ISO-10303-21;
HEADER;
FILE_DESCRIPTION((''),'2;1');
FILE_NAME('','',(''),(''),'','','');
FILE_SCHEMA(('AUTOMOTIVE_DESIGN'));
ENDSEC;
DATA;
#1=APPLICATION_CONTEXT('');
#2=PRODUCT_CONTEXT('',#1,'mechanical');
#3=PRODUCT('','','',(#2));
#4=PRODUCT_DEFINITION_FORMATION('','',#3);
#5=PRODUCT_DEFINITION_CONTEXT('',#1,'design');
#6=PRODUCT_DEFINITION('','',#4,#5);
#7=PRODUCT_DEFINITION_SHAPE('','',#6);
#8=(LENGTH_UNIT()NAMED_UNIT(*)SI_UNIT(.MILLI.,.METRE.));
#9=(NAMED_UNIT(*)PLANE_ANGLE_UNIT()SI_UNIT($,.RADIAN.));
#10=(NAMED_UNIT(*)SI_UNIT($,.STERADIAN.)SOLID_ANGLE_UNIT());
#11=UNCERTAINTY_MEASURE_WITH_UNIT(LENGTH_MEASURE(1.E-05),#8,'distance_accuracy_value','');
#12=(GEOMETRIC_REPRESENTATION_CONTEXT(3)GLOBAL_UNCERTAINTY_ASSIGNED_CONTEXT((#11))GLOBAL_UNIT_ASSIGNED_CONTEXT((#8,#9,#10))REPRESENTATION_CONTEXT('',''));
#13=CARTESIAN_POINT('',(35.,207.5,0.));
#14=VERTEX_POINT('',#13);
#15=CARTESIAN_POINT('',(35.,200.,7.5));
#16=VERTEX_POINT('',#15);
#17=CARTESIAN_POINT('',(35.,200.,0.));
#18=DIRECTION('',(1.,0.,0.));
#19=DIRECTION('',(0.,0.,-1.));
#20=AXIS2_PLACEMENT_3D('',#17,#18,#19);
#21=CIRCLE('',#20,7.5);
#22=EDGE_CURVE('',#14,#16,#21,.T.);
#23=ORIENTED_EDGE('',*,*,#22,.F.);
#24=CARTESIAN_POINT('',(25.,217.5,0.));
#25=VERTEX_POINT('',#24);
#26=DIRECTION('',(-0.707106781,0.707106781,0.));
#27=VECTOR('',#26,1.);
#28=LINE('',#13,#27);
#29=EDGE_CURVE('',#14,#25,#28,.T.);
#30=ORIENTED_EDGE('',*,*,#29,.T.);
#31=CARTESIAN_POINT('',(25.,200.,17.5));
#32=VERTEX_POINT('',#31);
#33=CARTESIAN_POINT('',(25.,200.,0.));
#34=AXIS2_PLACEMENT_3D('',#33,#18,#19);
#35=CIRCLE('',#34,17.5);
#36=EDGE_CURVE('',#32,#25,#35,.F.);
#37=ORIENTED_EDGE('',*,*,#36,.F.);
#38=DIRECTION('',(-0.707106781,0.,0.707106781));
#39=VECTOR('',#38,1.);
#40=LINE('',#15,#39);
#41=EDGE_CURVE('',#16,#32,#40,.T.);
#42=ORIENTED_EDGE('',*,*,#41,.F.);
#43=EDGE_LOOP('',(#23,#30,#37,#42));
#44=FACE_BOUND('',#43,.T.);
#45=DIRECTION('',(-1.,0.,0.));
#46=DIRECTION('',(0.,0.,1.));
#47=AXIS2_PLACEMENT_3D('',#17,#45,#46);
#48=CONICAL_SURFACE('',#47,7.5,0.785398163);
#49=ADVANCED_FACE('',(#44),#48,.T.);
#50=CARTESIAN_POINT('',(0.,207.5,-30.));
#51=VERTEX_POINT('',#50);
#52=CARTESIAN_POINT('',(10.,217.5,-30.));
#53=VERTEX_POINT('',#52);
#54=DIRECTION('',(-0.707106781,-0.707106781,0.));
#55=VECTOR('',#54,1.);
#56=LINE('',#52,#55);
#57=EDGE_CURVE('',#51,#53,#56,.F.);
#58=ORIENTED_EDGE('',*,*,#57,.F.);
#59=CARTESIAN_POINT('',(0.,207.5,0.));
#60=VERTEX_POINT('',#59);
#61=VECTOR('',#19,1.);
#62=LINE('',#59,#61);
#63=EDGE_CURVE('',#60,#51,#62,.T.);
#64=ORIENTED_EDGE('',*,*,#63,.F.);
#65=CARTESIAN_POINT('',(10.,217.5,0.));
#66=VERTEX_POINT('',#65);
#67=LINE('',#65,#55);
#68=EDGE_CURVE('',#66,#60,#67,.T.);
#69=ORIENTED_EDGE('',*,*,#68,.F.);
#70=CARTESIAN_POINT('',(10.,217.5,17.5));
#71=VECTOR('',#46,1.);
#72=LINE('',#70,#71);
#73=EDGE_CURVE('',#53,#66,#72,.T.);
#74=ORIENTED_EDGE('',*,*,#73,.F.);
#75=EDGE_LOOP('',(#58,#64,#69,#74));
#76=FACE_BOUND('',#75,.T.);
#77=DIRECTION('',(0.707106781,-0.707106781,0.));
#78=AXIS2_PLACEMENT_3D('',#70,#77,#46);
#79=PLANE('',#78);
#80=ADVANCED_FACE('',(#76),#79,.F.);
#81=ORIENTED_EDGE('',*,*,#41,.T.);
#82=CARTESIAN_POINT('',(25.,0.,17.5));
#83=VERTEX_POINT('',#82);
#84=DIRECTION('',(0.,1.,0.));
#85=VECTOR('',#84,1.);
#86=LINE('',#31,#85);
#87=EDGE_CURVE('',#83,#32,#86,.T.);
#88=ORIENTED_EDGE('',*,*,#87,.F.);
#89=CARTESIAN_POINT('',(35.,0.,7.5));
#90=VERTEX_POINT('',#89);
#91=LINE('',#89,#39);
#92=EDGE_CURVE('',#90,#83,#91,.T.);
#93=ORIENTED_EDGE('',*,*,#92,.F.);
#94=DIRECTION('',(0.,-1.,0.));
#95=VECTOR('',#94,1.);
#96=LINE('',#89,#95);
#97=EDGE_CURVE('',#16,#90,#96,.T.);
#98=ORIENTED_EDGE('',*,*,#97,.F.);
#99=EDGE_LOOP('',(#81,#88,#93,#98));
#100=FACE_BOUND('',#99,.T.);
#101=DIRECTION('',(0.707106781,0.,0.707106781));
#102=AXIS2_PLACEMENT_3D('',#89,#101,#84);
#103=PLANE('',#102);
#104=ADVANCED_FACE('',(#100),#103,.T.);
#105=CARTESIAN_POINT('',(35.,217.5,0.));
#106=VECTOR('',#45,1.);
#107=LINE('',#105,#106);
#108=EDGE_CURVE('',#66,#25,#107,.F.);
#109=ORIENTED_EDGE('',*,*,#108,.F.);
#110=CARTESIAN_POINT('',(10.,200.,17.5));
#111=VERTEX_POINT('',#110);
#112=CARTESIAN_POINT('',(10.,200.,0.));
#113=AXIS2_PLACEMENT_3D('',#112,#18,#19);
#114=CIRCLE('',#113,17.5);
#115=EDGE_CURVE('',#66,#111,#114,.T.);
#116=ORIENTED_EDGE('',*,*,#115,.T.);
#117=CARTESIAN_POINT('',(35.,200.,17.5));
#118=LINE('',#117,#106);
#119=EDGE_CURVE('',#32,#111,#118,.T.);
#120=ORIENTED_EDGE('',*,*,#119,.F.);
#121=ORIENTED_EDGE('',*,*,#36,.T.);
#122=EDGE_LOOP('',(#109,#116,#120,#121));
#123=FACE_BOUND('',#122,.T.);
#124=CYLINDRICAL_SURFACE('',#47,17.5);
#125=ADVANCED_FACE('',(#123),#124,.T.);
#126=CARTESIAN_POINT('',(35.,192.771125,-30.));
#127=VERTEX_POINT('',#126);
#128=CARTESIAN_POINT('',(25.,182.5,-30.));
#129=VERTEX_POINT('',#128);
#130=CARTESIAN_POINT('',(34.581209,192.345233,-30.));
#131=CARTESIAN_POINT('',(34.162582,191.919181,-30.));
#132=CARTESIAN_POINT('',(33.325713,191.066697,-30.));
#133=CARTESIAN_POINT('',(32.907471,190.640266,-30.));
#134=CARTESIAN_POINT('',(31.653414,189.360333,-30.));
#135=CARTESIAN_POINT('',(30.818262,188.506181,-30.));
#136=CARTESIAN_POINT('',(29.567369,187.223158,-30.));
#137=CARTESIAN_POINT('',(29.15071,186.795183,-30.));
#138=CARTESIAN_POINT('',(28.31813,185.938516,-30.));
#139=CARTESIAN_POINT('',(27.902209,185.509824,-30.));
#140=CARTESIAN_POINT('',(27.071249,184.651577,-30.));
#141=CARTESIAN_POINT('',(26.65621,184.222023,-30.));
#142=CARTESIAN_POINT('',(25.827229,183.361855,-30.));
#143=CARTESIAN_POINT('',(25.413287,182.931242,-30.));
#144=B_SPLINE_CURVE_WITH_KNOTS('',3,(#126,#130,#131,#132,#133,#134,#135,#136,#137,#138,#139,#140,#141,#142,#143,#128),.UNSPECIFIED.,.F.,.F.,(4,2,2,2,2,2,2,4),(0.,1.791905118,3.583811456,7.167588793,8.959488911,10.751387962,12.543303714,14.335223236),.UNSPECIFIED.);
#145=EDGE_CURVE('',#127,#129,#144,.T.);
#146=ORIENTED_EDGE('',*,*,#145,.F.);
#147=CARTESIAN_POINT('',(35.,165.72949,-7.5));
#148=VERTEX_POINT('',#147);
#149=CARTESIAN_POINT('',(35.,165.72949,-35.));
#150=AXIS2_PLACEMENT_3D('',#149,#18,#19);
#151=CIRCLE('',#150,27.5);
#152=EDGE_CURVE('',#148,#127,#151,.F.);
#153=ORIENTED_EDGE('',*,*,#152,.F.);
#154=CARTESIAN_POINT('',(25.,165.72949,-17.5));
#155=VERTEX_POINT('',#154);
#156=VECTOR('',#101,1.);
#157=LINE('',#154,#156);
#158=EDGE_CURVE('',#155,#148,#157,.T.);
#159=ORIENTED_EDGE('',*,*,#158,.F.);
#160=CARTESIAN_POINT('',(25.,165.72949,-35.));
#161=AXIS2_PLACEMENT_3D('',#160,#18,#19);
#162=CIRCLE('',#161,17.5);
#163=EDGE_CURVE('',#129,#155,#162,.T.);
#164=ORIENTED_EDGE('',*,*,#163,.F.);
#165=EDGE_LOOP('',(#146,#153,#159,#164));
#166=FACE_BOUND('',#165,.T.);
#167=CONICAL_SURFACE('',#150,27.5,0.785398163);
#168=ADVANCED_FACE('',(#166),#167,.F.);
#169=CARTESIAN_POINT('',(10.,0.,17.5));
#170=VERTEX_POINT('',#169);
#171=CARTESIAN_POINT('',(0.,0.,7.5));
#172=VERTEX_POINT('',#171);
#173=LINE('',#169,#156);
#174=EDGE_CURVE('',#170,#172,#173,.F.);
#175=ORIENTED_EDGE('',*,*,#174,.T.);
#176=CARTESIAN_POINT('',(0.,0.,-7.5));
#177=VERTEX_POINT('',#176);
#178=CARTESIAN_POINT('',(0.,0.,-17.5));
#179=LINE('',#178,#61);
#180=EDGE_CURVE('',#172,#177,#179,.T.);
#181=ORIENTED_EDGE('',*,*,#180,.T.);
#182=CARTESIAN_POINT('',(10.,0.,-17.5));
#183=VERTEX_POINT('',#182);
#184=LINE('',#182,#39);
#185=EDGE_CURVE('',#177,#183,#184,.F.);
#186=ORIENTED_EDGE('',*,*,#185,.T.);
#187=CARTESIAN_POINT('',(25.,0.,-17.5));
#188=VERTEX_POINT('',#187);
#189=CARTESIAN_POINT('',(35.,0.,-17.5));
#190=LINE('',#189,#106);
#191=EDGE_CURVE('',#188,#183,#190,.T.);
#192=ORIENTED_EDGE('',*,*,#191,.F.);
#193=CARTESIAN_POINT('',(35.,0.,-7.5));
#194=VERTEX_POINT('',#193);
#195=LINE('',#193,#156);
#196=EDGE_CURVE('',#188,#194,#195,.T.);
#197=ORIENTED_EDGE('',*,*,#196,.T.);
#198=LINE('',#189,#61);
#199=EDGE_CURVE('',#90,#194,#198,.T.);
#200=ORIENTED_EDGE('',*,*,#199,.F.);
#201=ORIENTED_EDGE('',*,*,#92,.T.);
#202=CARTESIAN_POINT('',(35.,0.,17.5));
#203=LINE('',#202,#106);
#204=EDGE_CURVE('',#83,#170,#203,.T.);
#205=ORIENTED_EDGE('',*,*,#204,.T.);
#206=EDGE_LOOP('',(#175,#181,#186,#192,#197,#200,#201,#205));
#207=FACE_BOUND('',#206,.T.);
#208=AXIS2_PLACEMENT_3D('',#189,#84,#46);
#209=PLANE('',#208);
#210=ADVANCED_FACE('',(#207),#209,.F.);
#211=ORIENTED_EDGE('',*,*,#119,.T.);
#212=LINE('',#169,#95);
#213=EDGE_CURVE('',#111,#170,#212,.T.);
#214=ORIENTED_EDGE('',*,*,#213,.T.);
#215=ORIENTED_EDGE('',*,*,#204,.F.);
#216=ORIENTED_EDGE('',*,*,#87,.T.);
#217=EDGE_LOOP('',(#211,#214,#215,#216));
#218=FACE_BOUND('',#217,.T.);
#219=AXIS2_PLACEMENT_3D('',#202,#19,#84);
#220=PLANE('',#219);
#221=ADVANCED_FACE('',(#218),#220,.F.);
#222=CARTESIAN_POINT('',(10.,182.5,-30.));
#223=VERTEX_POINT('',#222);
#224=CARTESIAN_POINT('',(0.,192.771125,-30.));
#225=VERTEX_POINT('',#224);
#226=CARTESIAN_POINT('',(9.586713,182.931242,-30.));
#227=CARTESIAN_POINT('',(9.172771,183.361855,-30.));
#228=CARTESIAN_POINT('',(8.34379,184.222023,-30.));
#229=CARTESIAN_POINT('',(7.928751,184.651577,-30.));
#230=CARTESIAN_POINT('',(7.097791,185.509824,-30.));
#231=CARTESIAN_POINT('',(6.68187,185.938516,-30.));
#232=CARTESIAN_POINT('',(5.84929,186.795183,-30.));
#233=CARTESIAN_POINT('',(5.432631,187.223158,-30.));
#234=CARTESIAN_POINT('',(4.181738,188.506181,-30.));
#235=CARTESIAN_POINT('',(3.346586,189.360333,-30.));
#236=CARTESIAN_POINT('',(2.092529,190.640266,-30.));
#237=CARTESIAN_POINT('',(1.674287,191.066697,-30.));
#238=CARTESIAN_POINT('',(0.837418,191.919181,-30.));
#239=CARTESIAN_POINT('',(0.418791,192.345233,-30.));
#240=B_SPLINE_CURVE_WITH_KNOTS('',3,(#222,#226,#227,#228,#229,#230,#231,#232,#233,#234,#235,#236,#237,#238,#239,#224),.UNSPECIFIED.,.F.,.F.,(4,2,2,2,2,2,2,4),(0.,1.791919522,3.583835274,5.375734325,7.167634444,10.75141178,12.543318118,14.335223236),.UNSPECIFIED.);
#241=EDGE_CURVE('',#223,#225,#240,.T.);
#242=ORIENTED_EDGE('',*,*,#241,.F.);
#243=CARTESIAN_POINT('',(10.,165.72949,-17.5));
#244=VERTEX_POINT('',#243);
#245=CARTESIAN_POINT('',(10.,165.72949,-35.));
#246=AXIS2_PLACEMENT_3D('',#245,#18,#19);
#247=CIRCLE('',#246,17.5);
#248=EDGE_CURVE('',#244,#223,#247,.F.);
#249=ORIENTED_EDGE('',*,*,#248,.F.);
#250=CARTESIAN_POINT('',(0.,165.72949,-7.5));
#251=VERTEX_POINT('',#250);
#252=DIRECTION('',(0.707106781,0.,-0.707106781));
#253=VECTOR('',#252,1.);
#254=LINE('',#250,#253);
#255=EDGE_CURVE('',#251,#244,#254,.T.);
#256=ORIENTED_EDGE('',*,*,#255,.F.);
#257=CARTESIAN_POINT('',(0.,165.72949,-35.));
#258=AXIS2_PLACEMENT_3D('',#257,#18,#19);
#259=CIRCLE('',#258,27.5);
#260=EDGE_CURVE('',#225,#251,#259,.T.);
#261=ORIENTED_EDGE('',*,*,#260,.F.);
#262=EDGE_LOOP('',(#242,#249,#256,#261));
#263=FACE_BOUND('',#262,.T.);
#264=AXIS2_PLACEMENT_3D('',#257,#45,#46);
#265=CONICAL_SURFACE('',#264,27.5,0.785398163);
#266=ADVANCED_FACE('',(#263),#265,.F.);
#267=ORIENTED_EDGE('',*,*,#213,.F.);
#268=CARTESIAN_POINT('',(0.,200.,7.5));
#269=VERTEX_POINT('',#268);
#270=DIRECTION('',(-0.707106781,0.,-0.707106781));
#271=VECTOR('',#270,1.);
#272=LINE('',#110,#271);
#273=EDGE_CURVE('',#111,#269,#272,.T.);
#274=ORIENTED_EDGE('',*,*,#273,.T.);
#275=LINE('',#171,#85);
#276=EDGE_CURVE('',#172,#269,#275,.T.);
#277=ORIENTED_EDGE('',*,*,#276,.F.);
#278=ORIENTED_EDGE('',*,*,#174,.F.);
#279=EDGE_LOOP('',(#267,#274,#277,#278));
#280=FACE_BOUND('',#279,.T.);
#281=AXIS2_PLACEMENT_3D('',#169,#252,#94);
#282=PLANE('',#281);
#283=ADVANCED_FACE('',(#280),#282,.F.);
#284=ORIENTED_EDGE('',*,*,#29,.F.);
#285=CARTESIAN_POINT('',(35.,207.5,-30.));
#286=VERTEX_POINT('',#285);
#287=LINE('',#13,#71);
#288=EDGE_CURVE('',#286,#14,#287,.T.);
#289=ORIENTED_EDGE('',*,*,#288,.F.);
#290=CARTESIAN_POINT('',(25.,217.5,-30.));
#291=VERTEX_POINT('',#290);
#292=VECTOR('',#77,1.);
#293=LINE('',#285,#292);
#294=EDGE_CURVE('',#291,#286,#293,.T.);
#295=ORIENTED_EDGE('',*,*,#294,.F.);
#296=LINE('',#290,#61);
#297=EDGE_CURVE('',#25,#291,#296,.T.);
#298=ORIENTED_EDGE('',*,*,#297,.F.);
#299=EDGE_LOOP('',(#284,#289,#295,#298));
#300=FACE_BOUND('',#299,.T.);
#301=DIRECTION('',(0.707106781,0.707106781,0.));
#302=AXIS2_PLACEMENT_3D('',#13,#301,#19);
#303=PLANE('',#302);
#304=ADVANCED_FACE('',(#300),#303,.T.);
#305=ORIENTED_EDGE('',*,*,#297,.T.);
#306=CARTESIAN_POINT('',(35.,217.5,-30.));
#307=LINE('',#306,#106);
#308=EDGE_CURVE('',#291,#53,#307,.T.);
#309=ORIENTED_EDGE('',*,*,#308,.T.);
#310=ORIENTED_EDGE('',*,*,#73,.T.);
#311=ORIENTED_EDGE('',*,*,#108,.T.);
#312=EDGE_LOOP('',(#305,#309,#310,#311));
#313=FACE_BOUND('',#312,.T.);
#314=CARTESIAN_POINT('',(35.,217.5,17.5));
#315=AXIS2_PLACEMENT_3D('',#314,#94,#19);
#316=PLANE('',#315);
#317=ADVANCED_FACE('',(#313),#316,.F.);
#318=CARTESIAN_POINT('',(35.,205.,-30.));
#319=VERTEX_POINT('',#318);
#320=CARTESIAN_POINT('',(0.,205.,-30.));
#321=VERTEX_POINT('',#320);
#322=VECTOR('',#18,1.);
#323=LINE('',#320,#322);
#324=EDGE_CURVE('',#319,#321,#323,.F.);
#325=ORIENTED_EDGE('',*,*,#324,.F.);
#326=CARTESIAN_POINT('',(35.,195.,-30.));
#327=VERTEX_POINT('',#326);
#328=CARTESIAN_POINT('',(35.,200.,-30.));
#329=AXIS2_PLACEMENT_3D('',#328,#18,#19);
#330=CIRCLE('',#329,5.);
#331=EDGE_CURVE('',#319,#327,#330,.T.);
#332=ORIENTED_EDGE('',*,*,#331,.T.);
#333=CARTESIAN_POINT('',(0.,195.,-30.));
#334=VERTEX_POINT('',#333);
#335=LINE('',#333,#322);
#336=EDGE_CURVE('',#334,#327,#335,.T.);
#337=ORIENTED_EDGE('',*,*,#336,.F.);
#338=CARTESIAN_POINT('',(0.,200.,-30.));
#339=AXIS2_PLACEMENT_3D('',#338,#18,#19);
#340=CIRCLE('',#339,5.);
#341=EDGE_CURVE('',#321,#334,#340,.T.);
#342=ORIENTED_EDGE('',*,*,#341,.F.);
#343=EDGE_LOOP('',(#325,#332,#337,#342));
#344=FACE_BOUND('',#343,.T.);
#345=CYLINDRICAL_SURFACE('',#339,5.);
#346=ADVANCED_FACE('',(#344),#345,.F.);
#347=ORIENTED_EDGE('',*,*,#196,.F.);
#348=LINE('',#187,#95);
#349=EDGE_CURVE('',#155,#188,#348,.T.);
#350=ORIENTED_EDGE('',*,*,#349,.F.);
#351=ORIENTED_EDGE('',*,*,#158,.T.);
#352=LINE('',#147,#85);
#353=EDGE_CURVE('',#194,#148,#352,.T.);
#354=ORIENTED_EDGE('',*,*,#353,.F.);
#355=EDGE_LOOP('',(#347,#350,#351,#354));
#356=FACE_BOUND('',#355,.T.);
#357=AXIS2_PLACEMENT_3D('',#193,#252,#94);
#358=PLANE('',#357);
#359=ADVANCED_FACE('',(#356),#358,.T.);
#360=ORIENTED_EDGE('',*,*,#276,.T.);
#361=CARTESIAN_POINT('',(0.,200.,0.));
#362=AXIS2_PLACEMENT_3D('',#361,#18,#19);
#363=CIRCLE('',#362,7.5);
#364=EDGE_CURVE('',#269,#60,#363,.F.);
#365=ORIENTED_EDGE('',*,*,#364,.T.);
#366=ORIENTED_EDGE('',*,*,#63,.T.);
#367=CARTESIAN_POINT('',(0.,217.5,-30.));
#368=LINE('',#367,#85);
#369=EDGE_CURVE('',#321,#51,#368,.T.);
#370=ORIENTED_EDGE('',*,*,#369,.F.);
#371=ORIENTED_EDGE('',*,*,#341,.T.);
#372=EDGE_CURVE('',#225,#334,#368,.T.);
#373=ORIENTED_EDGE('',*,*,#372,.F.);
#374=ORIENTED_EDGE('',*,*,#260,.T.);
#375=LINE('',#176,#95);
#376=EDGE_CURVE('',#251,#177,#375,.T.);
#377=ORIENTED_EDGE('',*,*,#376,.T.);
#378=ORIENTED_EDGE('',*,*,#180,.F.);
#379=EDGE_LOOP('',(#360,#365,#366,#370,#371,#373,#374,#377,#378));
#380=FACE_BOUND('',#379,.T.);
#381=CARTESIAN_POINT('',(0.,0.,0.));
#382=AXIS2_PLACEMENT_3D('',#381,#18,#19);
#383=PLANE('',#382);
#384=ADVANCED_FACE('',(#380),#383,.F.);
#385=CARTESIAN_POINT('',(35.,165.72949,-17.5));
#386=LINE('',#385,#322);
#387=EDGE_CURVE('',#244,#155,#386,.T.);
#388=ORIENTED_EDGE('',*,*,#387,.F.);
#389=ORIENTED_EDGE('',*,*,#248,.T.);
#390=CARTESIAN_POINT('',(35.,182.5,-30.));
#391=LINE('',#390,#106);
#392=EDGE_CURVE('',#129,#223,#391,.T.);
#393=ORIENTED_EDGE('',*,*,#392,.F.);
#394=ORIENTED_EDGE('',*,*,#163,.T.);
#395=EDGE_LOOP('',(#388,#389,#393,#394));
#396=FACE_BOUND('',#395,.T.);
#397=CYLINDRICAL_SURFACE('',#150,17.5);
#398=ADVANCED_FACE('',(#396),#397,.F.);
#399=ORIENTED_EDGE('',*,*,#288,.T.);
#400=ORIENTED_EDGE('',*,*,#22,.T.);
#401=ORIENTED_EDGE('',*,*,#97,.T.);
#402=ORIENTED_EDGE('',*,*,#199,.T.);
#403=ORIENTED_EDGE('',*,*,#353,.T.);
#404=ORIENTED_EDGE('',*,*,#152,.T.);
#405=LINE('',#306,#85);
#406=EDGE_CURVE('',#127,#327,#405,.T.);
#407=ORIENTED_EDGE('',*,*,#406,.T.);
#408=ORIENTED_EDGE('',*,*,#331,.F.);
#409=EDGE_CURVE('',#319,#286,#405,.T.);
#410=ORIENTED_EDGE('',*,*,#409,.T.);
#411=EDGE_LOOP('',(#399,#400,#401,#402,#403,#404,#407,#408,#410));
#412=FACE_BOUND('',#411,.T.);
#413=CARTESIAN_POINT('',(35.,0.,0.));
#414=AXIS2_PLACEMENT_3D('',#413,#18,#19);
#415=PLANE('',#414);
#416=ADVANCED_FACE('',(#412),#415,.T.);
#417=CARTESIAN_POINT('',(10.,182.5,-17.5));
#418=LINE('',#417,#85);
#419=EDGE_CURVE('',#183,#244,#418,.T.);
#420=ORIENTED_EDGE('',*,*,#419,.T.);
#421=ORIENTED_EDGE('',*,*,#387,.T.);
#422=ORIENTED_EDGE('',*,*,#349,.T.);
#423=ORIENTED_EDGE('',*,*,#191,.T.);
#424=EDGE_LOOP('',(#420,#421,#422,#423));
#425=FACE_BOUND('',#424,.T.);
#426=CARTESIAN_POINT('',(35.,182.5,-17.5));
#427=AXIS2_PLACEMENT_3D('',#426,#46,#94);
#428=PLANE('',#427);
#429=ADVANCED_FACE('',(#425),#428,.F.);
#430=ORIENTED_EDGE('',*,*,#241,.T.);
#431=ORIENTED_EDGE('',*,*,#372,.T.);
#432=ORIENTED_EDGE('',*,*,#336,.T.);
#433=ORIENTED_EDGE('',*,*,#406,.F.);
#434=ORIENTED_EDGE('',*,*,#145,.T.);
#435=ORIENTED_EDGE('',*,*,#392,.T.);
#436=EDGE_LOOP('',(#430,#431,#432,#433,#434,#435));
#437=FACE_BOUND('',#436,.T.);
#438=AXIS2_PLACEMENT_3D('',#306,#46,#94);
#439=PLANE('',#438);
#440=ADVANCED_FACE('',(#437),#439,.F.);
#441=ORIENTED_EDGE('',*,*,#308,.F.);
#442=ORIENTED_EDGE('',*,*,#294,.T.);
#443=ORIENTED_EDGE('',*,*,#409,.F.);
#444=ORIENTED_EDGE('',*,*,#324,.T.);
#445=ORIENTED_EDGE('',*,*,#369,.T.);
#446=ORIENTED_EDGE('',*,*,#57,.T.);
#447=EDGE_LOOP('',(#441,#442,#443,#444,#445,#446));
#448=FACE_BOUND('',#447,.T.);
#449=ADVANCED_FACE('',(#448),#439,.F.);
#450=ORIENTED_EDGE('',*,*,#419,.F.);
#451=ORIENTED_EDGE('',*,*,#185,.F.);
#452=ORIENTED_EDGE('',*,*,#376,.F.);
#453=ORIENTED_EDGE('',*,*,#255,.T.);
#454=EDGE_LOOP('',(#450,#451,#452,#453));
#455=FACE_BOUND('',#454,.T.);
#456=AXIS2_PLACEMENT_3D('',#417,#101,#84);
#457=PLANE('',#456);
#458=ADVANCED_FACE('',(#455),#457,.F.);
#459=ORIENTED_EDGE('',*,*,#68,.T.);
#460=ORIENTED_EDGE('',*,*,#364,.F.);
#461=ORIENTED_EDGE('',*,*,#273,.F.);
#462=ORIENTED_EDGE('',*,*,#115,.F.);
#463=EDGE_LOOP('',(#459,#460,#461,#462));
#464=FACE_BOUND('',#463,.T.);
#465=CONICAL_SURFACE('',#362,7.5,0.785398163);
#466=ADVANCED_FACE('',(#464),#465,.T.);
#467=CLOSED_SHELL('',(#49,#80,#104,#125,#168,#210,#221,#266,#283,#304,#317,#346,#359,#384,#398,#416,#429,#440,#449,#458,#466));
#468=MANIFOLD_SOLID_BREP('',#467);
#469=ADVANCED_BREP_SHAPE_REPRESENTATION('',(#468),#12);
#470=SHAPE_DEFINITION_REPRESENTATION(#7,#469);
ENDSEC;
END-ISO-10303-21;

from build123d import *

# Parameters (mm, degrees)
Y_KSEKLIK_EKSTR_ZYON4_DEPTH = 35
RADYUS1_R                   = 17.5
RADYUS2_R                   = 17.5
IZIM4_R                     = 5
KES_EKSTR_ZYON1_DEPTH       = 223.331396793
PAH1_SIZE                   = 10
PAH2_SIZE                   = 10
PAH4_SIZE                   = 10
PAH5_SIZE                   = 10


with BuildPart() as part:
    # Çizim3 → Yükseklik-Ekstrüzyon4 (new body)
    with BuildSketch(Plane(origin=(0, 0, 0), x_dir=(0, 0, -1), z_dir=(1, 0, 0))):
        Polygon((17.5, 182.5), (17.5, 0), (-17.5, 0), (-17.5, 217.5), (30, 217.5), (30, 182.5), align=None)
    extrude(amount=Y_KSEKLIK_EKSTR_ZYON4_DEPTH)

    # Radyus1
    radyus1_edges = [part.edges().sort_by_distance(p)[0] for p in [
        (17.5, 217.5, 17.5),
    ]]
    fillet(radyus1_edges, radius=RADYUS1_R)

    # Radyus2
    # the kernel refuses this fillet: 17.5 mm, written as the material it adds along each edge
    with BuildSketch(Plane(origin=(0, 182.5, -17.5), x_dir=(0, -1, 0), z_dir=(1, 0, 0))) as radyus2_piece_1:
        with BuildLine():
            CenterArc((16.770509831, 17.5), RADYUS2_R, 196.601549599, 73.398450401)
            Line((0, 12.5), (-0.335410197, 12.4))
            ThreePointArc((-0.335410197, 12.4), (-0.35, 6.25), (-0.35, 0))
            Line((-0.35, 0), (0, -0.35))
            Line((0, -0.35), (16.770509831, -0.35))
            Line((16.770509831, -0.35), (16.770509831, 0))
        make_face()
    extrude(amount=35)

    # Çizim4 → Kes-Ekstrüzyon1 (cut, through all)
    with BuildSketch(Plane(origin=(35, 0, 0), x_dir=(0, 0, -1), z_dir=(1, 0, 0))):
        with Locations((30, 200)):
            Circle(IZIM4_R)
    extrude(amount=-KES_EKSTR_ZYON1_DEPTH, mode=Mode.SUBTRACT)

    # Pah1
    pah1_edges = [part.edges().sort_by_distance(p)[0] for p in [
        (0, 100, 17.5),
        (0, 212.374368671, 12.374368671),
        (0, 217.5, -15),
    ]]
    chamfer(pah1_edges, length=PAH1_SIZE)

    # Pah2
    pah2_edges = [part.edges().sort_by_distance(p)[0] for p in [
        (35, 217.5, -15),
        (35, 100, 17.5),
        (35, 212.374368671, 12.374368671),
    ]]
    chamfer(pah2_edges, length=PAH2_SIZE)

    # Pah4
    pah4_edges = [part.edges().sort_by_distance(p)[0] for p in [
        (35, 82.864745084, -17.5),
        (35, 176.1877405, -20.9687848),
    ]]
    chamfer(pah4_edges, length=PAH4_SIZE)

    # Pah5
    pah5_edges = [part.edges().sort_by_distance(p)[0] for p in [
        (0, 176.1877405, -20.9687848),
        (0, 82.864745084, -17.5),
    ]]
    chamfer(pah5_edges, length=PAH5_SIZE)


solid = part.part
